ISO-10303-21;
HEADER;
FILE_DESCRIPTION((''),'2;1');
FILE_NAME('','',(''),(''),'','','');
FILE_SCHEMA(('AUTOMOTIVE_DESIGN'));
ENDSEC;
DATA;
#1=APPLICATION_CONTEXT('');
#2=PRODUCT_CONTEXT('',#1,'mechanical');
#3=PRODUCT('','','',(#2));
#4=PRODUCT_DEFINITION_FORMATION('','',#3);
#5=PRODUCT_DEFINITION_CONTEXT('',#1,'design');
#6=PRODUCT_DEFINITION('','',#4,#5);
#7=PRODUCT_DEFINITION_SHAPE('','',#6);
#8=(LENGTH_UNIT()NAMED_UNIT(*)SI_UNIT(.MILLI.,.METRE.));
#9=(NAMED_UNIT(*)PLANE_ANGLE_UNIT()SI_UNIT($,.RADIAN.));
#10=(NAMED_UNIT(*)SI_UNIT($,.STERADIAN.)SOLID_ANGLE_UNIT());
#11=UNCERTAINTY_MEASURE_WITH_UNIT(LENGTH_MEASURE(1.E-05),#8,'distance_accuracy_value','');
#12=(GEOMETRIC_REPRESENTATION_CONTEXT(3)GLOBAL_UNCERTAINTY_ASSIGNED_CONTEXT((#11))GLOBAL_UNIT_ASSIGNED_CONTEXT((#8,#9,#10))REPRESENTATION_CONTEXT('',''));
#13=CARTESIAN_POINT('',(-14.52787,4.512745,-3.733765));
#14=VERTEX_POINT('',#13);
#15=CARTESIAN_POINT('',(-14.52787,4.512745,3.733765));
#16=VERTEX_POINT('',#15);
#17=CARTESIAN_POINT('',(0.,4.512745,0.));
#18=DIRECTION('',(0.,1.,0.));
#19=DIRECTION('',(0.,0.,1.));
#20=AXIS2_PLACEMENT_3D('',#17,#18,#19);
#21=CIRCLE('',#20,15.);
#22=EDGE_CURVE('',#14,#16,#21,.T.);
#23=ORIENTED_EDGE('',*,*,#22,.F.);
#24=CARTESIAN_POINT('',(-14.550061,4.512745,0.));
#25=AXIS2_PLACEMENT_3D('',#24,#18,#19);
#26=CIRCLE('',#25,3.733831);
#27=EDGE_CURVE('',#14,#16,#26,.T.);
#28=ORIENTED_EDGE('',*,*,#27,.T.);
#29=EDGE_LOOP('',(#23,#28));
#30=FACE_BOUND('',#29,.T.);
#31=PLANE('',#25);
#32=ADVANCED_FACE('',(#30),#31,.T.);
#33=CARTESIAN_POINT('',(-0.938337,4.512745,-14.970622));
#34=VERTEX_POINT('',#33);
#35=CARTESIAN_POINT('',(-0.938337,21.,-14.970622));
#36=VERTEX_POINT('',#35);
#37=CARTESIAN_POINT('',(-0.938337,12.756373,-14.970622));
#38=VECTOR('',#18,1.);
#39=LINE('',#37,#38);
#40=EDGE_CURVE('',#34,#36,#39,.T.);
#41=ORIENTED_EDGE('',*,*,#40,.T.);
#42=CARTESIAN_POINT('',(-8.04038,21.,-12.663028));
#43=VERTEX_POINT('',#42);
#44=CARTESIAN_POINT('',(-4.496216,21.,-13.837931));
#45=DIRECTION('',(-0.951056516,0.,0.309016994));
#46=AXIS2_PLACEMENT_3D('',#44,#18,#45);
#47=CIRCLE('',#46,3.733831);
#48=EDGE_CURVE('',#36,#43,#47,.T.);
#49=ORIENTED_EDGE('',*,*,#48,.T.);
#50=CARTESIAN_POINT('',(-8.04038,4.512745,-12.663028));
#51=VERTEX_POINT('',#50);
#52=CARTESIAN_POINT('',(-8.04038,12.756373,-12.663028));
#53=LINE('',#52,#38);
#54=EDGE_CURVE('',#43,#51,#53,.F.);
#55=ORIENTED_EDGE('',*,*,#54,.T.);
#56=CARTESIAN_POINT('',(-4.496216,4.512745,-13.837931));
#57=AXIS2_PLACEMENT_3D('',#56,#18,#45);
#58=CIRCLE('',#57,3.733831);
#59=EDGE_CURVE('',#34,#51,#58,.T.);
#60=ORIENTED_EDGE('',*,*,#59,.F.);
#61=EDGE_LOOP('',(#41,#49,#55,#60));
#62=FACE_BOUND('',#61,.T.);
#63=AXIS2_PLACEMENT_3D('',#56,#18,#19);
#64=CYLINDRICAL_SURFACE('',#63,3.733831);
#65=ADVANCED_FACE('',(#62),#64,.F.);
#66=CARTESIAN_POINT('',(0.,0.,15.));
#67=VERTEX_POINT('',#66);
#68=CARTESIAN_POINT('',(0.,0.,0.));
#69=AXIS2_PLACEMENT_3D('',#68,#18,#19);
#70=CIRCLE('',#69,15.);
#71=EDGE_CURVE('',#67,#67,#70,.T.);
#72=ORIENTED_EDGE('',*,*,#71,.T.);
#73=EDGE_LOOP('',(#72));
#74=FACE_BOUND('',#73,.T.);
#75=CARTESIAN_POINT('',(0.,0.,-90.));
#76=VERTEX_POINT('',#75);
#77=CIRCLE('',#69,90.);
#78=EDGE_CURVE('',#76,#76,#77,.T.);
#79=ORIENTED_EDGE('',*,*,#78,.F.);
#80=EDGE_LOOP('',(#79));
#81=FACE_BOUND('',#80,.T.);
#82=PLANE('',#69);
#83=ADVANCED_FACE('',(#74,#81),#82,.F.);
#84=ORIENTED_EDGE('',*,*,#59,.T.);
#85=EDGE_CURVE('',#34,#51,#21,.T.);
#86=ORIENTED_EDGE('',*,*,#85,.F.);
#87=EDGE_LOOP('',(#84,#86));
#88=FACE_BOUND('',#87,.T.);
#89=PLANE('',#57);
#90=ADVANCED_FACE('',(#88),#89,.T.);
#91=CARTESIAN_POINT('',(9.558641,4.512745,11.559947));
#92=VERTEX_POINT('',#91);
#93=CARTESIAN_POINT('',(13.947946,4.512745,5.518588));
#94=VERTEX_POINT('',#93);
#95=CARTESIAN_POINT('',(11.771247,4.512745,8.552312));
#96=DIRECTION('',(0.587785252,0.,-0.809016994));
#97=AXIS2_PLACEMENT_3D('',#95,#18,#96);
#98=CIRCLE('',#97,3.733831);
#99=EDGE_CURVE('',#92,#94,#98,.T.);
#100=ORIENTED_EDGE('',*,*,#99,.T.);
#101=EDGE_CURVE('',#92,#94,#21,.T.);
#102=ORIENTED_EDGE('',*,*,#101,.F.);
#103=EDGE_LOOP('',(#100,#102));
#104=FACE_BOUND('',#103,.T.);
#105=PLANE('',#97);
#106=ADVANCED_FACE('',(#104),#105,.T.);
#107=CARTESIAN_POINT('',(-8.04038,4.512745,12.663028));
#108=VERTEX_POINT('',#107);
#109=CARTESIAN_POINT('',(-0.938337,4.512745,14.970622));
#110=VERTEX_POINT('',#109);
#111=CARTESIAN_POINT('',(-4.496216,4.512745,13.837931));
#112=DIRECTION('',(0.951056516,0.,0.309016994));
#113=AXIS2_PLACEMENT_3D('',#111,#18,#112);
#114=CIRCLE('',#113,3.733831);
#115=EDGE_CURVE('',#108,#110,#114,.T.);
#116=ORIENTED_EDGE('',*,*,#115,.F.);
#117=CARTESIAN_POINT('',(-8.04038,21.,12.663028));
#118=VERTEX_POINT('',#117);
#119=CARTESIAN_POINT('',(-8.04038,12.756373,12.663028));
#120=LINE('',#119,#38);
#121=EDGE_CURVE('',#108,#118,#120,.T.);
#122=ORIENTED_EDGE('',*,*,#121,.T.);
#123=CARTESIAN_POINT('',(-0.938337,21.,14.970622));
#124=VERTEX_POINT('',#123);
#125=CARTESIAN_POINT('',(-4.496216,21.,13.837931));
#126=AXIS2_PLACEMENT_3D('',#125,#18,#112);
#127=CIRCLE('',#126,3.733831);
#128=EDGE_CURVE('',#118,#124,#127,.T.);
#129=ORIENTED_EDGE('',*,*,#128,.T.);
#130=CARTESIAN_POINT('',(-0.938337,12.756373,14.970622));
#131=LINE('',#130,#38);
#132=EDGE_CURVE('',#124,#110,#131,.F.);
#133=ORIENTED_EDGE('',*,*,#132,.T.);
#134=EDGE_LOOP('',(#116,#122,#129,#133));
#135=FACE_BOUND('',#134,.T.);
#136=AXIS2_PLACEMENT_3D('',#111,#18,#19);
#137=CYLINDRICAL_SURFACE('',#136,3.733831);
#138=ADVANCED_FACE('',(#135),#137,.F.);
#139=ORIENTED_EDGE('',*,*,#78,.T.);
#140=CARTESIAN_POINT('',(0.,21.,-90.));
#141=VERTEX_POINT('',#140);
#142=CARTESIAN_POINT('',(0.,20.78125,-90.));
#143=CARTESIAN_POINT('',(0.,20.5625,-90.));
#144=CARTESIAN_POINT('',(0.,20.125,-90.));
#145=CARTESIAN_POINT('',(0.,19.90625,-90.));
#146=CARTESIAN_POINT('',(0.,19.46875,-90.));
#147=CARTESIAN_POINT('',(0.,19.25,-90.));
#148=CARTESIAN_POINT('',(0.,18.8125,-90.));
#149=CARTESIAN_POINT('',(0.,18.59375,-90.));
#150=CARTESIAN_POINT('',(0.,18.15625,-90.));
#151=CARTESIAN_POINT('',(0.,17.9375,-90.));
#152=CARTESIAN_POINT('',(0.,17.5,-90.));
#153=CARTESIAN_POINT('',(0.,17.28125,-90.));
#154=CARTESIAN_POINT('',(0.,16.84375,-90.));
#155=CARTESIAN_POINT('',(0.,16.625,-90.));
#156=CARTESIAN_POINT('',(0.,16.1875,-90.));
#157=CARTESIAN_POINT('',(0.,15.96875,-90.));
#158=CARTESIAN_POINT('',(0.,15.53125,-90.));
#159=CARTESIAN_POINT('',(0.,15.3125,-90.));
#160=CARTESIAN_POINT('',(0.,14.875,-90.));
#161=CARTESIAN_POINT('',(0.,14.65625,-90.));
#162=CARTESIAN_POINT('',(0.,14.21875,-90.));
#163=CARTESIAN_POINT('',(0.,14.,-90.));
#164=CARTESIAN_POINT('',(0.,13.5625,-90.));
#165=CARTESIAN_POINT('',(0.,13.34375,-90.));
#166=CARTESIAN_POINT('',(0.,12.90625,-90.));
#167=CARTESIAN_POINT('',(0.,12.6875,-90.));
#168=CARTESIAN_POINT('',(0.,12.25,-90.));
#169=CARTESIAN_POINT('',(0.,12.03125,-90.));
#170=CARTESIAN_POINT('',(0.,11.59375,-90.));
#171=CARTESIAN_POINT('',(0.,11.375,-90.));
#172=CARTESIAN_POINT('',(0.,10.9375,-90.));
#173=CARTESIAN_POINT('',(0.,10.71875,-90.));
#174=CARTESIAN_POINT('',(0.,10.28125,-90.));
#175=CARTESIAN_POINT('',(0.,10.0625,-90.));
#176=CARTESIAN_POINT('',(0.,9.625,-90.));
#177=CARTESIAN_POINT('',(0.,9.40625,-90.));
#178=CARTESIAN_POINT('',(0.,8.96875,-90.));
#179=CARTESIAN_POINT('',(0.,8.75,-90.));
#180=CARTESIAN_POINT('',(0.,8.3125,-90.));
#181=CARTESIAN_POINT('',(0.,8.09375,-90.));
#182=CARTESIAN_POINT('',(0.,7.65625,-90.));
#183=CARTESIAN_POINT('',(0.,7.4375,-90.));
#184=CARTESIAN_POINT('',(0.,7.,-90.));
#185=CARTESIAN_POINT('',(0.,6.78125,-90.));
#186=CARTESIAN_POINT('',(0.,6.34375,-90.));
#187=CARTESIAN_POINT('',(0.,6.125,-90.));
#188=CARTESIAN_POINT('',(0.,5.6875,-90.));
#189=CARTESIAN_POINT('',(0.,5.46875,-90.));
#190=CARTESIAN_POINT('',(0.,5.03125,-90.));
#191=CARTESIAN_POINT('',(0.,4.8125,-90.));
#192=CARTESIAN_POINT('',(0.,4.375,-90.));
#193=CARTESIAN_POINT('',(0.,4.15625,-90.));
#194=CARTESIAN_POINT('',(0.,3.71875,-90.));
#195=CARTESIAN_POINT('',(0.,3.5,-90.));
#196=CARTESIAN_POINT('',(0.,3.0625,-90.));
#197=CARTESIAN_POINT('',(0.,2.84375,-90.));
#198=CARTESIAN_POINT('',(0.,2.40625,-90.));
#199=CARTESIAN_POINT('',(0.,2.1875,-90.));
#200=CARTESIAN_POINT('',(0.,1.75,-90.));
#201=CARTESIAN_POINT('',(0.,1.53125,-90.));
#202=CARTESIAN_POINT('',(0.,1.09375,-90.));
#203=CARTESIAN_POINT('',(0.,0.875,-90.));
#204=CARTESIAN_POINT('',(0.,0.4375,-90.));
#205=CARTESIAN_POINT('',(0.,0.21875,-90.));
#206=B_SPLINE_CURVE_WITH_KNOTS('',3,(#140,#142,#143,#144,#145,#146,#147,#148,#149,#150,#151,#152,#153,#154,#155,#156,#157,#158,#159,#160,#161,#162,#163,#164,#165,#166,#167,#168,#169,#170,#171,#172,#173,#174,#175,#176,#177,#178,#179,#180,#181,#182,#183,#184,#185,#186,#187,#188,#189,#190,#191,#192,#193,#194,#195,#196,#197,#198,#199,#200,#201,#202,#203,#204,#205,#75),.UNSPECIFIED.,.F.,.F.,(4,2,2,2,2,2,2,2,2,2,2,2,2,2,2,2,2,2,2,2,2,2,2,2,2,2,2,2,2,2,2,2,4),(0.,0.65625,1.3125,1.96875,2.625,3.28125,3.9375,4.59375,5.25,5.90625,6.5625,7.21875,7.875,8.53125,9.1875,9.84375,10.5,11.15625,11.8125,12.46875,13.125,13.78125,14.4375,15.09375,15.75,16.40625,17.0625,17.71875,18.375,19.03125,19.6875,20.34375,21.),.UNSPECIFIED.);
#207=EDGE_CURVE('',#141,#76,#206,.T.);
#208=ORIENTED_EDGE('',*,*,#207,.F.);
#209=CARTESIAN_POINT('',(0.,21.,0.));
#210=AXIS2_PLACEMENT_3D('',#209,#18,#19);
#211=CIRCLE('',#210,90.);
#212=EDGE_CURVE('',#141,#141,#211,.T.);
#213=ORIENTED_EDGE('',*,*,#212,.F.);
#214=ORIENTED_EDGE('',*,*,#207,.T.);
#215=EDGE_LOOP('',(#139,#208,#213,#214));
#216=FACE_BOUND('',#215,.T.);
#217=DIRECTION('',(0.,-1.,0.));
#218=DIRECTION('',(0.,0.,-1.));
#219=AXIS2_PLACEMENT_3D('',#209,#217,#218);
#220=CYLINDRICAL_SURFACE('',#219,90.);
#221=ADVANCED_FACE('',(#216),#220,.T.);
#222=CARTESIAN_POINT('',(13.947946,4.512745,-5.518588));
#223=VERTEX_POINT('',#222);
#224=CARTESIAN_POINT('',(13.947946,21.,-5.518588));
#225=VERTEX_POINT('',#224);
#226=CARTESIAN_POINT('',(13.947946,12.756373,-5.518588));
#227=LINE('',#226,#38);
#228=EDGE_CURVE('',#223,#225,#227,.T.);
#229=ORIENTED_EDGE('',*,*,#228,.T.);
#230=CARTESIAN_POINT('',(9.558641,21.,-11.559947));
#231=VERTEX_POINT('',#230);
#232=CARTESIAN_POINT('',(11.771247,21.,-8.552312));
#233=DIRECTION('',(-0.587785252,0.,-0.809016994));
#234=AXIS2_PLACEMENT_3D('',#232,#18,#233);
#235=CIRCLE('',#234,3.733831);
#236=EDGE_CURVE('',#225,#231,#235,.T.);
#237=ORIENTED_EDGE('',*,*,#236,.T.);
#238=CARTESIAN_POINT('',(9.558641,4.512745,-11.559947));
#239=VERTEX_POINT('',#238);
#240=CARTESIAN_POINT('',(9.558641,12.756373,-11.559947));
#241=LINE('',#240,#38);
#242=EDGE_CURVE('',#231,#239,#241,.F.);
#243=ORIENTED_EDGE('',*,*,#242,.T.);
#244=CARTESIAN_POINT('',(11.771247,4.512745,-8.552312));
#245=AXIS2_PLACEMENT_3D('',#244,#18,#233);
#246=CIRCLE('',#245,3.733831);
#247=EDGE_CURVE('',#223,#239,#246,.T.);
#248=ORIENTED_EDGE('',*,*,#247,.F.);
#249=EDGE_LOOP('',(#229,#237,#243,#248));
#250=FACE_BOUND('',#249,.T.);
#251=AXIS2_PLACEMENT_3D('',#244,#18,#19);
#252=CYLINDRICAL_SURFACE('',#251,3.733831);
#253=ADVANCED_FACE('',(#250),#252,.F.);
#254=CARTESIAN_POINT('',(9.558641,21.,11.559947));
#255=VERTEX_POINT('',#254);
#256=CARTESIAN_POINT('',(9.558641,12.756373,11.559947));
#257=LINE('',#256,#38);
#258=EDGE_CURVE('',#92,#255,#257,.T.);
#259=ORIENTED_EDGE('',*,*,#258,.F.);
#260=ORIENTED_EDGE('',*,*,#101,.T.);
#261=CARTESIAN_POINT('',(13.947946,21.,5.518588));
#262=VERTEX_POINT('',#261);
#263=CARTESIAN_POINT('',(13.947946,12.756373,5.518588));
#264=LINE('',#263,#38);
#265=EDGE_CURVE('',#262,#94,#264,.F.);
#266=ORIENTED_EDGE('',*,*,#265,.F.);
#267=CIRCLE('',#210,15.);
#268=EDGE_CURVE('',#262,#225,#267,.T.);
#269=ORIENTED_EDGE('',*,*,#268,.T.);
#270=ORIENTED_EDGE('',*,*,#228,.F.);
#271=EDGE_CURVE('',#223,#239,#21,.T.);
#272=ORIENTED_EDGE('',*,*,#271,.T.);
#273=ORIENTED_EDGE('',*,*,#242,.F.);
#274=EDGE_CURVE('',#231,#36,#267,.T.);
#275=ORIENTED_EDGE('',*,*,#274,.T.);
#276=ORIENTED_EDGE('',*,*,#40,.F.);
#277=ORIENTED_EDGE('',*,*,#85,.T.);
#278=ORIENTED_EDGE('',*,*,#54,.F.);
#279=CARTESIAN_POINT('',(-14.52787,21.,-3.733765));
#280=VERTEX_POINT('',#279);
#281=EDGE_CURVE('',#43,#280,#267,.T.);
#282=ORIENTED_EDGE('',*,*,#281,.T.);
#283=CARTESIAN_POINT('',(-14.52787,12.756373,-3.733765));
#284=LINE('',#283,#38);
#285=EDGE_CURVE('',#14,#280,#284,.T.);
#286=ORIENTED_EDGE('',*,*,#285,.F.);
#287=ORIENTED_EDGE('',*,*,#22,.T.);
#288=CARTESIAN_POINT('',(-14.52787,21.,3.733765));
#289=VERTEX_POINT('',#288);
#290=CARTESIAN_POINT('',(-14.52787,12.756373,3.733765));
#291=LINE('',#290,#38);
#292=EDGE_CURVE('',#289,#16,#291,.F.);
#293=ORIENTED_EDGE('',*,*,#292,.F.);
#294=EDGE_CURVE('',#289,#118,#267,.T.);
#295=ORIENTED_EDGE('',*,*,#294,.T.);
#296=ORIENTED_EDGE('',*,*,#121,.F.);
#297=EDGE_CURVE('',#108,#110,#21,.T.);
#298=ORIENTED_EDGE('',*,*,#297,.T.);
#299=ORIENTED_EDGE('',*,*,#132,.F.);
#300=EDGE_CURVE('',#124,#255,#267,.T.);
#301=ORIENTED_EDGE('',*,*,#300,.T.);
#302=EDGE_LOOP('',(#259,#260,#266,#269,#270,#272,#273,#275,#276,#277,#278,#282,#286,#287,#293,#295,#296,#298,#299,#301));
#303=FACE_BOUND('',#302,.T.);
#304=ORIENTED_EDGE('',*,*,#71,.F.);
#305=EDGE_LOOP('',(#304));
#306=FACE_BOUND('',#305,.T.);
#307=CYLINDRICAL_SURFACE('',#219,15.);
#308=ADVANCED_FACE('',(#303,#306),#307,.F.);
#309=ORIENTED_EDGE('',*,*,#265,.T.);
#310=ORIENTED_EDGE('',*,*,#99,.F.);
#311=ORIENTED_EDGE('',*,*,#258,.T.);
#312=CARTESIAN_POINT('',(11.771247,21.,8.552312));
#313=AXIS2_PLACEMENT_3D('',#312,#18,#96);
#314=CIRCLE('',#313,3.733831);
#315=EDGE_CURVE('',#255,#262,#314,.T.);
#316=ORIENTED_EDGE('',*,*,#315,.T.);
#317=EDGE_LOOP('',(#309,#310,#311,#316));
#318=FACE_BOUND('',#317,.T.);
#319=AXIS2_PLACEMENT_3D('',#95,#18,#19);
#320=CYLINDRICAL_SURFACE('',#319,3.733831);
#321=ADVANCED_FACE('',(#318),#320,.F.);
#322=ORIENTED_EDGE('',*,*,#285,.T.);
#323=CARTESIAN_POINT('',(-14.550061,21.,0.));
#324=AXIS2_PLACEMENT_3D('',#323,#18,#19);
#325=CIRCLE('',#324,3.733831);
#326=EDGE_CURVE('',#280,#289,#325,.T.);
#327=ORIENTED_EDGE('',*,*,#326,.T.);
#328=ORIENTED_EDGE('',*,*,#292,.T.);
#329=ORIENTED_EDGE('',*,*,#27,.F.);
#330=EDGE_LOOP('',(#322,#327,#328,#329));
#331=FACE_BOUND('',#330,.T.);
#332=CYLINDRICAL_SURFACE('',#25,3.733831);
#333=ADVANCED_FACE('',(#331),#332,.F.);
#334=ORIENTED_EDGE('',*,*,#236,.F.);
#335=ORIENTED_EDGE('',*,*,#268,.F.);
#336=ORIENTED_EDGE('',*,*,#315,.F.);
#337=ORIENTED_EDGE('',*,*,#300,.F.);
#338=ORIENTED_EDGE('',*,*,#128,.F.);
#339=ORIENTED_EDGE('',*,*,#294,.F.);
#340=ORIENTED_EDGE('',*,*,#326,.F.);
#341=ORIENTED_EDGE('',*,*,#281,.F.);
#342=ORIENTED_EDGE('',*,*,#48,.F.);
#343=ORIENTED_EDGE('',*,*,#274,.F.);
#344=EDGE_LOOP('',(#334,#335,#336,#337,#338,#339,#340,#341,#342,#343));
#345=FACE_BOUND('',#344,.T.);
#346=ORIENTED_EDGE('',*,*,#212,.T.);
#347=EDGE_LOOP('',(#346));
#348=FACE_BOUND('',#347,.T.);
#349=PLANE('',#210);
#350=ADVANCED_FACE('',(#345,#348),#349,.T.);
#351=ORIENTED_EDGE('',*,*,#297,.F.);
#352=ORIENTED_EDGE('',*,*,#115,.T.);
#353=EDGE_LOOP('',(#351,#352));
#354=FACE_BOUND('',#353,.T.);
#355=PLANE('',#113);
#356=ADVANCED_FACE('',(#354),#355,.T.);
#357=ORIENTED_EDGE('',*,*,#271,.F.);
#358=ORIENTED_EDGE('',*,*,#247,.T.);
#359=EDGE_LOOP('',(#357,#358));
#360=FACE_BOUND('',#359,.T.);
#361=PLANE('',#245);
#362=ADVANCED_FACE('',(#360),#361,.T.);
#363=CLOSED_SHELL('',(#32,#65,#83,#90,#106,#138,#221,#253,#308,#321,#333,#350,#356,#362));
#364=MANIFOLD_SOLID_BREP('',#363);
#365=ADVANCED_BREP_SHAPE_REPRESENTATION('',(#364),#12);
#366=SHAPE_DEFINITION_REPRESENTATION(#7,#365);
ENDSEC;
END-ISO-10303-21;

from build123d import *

# Parameters (mm, degrees)
SKETCH1_R           = 90
BOSS_EXTRUDE1_DEPTH = 21
SKETCH2_R           = 15
CUT_EXTRUDE1_DEPTH  = 130
SKETCH3_R           = 3.733831239
CUT_EXTRUDE2_DEPTH  = 16.487254779
CIRPATTERN1_COUNT   = 5


with BuildPart() as part:
    # Sketch1 → Boss-Extrude1 (new body)
    with BuildSketch(Plane(origin=(0, 0, 0), x_dir=(1, 0, 0), z_dir=(0, 1, 0))):
        Circle(SKETCH1_R)
    extrude(amount=BOSS_EXTRUDE1_DEPTH)

    # Sketch2 → Cut-Extrude1 (cut, through all)
    with BuildSketch(Plane(origin=(0, 0, 0), x_dir=(1, 0, 0), z_dir=(0, 1, 0))):
        Circle(SKETCH2_R)
    extrude(amount=CUT_EXTRUDE1_DEPTH, mode=Mode.SUBTRACT)

    # Sketch3 → Cut-Extrude2 (cut)
    with BuildSketch(Plane(origin=(0, 21, 0), x_dir=(1, 0, 0), z_dir=(0, 1, 0))):
        with Locations((-14.55006149, 0)):
            Circle(SKETCH3_R)
    cut_extrude2 = extrude(amount=-CUT_EXTRUDE2_DEPTH, mode=Mode.SUBTRACT)

    # CirPattern1: Cut-Extrude2 ×5 about axis
    cirpattern1_axis = Axis((0, 0, 0), (0, 1, 0))
    for i in range(1, CIRPATTERN1_COUNT):
        add(cut_extrude2.rotate(cirpattern1_axis, i * 360 / CIRPATTERN1_COUNT), mode=Mode.SUBTRACT)


solid = part.part
